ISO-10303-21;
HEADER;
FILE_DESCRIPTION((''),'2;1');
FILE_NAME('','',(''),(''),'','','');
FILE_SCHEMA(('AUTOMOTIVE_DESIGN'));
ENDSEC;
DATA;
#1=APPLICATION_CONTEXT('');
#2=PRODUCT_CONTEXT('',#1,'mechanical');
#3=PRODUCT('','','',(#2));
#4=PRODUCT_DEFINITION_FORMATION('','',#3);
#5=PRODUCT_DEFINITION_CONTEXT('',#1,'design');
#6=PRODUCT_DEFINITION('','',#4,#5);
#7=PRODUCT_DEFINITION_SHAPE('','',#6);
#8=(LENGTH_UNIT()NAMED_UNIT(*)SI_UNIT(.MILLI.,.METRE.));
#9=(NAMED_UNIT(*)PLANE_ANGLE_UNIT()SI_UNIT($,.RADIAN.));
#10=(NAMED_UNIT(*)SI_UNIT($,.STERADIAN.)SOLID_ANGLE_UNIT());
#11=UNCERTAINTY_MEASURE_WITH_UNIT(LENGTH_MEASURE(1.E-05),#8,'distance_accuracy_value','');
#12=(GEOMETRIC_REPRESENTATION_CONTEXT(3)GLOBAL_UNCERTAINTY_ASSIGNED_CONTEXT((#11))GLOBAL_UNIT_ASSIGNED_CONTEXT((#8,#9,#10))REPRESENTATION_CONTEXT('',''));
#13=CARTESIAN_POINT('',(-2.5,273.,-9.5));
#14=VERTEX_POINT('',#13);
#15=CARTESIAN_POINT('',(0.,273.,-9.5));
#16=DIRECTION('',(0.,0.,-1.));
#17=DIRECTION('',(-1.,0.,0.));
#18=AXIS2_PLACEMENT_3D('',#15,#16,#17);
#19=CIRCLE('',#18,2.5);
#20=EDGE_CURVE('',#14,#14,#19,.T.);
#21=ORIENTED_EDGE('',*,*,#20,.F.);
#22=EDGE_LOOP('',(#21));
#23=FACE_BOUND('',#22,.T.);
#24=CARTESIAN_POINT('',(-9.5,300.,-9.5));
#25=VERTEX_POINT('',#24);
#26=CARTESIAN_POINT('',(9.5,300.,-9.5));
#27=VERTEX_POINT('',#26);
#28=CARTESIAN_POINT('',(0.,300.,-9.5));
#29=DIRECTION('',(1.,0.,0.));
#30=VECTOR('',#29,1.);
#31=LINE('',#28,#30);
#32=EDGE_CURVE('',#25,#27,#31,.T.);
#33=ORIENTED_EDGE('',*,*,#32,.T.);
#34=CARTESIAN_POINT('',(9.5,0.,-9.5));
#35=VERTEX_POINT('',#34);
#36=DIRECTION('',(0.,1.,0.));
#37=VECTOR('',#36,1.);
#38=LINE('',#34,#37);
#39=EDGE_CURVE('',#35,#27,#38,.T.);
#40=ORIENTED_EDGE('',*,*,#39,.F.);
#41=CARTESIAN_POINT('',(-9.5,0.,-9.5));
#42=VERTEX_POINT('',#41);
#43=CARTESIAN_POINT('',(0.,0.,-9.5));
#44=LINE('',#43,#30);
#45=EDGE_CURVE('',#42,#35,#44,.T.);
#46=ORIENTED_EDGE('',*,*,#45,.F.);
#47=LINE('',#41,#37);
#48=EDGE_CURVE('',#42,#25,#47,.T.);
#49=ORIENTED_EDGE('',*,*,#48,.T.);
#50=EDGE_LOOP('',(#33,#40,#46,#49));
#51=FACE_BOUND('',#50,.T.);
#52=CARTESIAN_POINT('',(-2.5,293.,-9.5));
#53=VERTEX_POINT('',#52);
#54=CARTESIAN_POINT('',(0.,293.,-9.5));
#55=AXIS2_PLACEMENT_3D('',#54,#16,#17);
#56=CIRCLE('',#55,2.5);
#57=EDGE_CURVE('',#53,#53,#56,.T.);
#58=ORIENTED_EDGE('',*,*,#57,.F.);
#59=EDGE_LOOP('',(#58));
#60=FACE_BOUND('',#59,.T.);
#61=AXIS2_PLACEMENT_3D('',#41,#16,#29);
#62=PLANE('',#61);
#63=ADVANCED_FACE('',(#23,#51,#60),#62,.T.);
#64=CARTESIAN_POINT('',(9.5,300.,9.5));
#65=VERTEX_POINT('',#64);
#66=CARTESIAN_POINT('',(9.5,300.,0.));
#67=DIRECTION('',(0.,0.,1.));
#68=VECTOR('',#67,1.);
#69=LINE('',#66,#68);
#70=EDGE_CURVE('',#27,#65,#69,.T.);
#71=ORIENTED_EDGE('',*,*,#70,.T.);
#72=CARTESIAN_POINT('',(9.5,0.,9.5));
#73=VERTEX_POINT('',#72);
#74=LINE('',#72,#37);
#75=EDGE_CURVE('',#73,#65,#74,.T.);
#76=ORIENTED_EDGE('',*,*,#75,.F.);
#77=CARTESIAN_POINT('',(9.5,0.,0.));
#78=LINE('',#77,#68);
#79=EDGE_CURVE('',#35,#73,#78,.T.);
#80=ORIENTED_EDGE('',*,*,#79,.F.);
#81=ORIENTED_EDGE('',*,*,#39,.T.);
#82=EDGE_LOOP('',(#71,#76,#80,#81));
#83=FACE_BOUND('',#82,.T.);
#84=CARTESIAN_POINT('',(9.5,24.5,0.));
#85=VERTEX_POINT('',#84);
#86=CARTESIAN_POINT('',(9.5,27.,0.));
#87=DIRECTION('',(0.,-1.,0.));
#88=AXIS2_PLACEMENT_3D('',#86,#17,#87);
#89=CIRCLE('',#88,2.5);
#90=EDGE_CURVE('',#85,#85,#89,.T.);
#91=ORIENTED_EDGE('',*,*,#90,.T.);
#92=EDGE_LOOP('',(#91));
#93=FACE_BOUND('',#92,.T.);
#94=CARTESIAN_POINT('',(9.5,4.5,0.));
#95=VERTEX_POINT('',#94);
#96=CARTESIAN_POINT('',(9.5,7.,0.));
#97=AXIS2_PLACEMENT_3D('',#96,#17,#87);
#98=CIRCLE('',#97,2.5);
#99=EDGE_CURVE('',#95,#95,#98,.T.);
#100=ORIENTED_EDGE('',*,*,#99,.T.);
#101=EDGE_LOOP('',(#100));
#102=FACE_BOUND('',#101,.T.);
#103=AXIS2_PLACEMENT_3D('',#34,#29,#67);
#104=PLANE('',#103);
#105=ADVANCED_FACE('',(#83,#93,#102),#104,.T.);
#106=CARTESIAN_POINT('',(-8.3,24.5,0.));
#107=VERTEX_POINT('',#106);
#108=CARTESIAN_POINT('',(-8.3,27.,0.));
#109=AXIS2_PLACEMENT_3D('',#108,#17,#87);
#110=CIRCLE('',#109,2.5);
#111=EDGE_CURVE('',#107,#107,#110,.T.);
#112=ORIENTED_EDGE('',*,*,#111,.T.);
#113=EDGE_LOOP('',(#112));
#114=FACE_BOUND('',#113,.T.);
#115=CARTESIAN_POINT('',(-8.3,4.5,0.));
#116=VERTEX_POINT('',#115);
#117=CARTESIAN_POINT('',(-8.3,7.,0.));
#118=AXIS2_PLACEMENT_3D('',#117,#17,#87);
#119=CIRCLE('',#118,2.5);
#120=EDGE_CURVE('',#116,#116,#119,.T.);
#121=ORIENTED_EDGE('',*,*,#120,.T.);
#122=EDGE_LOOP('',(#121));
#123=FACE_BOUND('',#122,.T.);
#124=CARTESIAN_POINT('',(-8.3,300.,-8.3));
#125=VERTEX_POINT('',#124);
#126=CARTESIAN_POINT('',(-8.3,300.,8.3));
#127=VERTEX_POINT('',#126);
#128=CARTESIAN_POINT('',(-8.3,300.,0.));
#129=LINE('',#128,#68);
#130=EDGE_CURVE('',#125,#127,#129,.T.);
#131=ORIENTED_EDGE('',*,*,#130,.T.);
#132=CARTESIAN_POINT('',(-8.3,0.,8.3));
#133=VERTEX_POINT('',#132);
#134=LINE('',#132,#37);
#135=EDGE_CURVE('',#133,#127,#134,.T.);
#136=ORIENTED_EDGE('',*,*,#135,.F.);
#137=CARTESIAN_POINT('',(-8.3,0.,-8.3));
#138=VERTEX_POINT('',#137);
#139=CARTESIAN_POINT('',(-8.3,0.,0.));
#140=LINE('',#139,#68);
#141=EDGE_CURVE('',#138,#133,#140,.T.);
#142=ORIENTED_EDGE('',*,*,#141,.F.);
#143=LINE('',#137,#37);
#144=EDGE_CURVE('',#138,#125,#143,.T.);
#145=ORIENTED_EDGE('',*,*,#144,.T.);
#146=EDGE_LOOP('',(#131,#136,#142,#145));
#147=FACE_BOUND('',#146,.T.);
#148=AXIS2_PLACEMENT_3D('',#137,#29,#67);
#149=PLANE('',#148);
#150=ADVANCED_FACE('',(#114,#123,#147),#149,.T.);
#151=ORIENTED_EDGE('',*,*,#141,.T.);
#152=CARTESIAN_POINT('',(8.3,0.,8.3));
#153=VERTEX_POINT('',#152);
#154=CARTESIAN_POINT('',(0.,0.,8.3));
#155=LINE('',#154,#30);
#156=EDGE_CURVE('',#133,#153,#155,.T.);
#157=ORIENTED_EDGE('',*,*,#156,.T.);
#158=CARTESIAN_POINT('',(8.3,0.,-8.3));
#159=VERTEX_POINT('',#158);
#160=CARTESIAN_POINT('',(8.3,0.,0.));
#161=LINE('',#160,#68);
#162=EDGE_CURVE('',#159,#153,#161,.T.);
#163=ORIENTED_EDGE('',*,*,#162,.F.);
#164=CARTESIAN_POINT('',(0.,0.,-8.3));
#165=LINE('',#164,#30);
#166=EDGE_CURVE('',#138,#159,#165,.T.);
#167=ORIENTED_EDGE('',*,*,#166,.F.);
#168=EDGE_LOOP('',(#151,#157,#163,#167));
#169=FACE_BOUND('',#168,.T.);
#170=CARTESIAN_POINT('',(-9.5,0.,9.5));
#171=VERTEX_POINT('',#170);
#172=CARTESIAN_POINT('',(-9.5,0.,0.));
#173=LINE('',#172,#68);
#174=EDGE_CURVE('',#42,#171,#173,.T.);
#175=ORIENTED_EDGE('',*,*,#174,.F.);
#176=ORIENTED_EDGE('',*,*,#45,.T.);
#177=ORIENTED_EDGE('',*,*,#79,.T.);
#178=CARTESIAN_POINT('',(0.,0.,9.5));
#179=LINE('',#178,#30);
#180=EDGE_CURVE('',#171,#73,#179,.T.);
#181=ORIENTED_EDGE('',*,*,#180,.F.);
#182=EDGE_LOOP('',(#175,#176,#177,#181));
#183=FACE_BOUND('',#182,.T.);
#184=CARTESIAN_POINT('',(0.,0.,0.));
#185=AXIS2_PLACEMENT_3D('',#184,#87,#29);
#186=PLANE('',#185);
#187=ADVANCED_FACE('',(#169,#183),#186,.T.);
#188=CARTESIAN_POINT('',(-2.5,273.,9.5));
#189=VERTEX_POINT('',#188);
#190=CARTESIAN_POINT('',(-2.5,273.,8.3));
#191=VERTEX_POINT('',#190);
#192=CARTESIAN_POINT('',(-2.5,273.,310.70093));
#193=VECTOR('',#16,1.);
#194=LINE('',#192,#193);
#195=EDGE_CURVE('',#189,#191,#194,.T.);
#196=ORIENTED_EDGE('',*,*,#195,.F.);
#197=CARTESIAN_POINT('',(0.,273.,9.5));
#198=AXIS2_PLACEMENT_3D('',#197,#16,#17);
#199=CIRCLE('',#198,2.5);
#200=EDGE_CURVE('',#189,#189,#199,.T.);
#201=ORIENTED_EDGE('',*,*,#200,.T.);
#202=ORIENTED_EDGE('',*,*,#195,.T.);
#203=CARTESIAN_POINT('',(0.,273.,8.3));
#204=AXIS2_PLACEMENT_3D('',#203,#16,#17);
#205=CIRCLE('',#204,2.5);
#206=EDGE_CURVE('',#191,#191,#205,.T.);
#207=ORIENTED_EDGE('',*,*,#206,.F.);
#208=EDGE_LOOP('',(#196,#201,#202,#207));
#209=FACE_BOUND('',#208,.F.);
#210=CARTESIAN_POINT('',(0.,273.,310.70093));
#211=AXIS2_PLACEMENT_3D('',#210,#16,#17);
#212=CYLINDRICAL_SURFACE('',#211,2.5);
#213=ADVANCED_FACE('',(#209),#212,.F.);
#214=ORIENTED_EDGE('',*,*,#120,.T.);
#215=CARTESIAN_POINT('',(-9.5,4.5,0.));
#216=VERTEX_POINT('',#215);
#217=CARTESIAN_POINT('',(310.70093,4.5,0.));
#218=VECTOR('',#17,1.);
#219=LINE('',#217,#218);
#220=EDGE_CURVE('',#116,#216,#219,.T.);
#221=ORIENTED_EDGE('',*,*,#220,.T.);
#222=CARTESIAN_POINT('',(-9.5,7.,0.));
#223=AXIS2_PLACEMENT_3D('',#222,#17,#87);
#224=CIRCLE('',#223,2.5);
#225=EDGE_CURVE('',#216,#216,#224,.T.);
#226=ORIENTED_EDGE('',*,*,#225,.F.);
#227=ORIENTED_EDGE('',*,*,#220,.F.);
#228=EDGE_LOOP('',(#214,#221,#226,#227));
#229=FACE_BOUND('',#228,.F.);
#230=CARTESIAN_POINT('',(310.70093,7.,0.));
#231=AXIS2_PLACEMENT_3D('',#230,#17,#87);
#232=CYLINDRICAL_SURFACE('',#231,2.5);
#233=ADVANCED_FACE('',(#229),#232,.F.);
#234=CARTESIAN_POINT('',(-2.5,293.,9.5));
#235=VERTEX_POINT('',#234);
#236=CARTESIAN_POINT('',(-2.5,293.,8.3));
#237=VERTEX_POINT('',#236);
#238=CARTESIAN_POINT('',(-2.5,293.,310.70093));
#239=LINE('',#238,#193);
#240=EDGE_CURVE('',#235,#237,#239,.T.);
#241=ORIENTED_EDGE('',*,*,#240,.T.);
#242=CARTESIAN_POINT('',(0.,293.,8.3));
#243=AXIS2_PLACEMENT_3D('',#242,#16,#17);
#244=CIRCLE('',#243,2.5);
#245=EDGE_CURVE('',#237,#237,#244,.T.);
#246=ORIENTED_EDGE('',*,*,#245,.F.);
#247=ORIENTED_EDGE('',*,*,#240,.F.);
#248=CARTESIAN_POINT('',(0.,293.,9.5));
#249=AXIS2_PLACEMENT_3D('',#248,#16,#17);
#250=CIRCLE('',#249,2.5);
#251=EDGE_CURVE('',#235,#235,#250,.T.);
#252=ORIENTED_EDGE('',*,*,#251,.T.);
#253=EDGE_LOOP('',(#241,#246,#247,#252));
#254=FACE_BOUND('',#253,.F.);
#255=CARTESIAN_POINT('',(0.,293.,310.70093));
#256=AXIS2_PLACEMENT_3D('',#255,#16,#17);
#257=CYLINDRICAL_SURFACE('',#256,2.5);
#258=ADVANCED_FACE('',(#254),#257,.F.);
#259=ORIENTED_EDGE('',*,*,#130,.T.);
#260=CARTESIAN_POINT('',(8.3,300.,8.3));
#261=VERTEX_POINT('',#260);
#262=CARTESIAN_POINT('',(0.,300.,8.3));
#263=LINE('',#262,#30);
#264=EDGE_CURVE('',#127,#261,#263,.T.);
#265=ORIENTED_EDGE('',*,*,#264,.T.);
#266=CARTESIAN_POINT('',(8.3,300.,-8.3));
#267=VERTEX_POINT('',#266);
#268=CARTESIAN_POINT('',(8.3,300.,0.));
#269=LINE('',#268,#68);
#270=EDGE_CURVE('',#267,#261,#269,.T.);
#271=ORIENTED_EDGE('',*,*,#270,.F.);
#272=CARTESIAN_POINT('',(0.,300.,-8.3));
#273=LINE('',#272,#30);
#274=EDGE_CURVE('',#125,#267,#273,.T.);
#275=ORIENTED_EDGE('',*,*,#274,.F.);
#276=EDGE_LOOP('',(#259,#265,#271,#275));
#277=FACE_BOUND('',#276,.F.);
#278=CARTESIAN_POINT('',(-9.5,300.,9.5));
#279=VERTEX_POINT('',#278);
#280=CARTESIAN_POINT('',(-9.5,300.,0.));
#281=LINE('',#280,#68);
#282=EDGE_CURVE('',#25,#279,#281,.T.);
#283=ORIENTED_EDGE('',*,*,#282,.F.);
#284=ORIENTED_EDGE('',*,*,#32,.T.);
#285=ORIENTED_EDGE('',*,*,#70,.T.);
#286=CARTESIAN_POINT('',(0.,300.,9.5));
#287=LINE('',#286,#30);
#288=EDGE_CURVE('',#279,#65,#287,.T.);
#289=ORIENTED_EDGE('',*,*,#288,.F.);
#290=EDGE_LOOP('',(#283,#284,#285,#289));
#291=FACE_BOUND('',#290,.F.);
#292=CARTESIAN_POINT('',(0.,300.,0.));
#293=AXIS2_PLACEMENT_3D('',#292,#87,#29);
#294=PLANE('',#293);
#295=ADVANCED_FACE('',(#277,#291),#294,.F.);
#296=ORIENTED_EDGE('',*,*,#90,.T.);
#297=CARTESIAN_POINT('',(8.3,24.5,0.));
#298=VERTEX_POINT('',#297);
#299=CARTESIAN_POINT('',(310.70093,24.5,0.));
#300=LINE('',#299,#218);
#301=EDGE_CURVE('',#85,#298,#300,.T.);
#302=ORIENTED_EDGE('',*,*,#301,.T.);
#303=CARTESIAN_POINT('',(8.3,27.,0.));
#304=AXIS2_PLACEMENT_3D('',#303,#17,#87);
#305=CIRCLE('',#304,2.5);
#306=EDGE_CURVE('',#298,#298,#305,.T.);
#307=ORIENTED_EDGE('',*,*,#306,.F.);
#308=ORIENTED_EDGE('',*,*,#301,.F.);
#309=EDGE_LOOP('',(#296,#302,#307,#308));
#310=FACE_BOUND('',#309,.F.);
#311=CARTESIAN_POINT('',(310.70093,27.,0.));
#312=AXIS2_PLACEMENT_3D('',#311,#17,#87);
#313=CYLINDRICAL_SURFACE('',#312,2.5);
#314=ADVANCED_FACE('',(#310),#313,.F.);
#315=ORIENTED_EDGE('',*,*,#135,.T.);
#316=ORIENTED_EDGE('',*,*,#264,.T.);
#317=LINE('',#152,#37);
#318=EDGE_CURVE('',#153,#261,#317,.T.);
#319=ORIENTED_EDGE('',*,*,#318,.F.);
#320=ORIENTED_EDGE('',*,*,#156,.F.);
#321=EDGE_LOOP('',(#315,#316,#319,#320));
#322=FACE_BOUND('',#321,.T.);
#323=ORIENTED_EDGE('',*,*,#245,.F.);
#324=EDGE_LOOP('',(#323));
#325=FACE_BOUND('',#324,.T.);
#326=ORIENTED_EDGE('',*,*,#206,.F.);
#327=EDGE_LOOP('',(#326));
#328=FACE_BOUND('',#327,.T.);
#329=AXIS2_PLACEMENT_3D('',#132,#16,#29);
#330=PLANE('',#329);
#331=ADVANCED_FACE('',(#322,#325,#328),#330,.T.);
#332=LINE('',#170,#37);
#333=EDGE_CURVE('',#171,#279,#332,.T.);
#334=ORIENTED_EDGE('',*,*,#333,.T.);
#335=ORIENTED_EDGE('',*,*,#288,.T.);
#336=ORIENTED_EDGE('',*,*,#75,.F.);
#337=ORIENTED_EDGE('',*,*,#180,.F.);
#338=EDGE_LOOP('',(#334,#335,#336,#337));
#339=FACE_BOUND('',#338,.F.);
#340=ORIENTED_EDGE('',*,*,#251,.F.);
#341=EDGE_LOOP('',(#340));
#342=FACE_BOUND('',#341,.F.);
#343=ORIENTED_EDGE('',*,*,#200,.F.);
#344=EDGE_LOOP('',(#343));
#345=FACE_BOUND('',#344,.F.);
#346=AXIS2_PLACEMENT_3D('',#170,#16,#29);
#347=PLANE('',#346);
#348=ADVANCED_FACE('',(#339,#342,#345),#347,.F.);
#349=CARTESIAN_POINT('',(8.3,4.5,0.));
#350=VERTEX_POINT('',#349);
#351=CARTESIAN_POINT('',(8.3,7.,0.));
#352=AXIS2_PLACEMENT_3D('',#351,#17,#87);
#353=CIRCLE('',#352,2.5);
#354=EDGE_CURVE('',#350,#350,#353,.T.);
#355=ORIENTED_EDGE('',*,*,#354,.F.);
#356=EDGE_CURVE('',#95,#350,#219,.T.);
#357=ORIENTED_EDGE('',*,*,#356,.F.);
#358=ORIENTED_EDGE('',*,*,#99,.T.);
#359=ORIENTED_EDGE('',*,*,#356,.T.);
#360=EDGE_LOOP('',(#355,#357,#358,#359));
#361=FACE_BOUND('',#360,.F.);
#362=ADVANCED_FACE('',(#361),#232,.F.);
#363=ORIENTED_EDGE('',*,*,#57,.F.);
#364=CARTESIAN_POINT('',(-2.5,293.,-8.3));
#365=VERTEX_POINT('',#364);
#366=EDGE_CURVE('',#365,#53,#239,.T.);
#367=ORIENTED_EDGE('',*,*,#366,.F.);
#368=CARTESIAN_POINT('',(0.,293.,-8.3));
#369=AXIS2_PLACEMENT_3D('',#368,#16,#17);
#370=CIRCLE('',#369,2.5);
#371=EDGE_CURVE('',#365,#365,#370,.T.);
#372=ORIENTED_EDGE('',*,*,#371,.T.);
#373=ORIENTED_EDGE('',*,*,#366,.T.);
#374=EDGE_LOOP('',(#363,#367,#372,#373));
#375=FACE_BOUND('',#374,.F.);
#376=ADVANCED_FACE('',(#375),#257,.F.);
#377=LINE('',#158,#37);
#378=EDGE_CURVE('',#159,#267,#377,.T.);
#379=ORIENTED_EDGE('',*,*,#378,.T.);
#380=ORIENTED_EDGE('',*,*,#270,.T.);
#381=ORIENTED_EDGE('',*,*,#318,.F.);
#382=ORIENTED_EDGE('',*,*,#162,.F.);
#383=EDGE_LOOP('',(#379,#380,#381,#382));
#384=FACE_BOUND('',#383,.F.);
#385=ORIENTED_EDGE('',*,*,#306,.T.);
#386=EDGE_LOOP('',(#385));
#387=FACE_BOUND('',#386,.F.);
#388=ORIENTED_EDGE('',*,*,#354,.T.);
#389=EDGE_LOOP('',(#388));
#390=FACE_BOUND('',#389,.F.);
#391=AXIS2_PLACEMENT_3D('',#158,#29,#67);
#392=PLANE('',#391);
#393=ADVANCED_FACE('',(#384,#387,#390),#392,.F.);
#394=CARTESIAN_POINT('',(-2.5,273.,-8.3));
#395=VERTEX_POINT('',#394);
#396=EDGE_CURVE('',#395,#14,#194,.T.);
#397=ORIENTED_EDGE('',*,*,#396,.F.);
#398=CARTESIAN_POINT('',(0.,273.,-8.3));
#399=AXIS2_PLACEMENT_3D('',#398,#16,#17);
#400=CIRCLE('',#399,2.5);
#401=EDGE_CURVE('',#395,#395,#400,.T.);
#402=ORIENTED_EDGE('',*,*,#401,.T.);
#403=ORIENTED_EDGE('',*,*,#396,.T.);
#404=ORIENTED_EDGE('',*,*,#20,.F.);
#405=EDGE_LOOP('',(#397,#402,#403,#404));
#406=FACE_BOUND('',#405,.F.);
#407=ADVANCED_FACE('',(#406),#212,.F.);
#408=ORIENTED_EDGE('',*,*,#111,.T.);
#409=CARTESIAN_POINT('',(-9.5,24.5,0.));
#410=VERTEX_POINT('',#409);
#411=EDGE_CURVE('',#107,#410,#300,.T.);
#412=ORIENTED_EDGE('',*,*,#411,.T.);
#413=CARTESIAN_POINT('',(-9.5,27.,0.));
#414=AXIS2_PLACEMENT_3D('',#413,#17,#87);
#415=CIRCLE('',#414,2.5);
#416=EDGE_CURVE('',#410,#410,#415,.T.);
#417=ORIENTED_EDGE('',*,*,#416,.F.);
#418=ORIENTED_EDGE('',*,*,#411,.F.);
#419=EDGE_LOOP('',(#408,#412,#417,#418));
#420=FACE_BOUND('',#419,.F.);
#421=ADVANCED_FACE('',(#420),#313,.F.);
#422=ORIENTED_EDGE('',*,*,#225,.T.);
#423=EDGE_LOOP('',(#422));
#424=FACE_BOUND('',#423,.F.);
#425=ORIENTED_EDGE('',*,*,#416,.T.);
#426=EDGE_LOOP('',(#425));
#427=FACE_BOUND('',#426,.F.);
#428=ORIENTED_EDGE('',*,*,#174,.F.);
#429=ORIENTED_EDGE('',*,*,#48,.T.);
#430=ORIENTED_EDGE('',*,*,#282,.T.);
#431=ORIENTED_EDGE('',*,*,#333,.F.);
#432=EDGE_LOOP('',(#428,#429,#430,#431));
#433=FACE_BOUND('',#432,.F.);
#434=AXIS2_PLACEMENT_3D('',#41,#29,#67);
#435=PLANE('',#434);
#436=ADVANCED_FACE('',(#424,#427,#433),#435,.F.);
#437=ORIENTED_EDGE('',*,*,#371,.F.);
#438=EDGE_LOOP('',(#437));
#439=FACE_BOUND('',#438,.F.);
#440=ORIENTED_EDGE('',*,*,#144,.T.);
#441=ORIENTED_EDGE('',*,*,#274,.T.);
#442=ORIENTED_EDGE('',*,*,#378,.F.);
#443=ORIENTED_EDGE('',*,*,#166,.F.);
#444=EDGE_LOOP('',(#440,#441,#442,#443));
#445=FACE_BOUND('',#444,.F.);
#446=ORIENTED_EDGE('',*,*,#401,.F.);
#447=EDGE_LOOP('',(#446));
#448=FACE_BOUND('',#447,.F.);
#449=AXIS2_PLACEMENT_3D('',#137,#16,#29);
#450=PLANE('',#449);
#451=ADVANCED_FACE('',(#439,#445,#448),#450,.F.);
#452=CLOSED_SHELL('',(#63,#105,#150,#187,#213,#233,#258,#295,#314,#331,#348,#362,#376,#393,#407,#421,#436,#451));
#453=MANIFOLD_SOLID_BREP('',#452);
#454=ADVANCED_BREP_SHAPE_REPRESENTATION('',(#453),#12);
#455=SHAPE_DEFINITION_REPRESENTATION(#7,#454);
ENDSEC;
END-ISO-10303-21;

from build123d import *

# Parameters (mm, degrees)
F1_W       = 19
F1_H       = 19
F1_W_2     = 16.6
F1_H_2     = 16.6
F2_DEPTH   = 300
F5_D       = 5
F5_ON_F4_D = 5


# Not quite as in the source:
# - a feature names something its author has since deleted; it is built from what else it names


with BuildPart() as f2:
    # F1 (on Front) → F2 (new body)
    with BuildSketch(Plane.XZ):
        Rectangle(F1_W, F1_H)
        Rectangle(F1_W_2, F1_H_2, mode=Mode.SUBTRACT)
    extrude(amount=-F2_DEPTH)

    # F5 (through all)
    with Locations(Plane.YZ.offset(9.5)):
        with Locations((7, 0), (27, 0)):
            Hole(F5_D / 2)

    # F5 on F4 (through all)
    with Locations(Plane.XY.offset(9.5)):
        with Locations((0, 273), (0, 293)):
            Hole(F5_ON_F4_D / 2)


solid = f2.part
